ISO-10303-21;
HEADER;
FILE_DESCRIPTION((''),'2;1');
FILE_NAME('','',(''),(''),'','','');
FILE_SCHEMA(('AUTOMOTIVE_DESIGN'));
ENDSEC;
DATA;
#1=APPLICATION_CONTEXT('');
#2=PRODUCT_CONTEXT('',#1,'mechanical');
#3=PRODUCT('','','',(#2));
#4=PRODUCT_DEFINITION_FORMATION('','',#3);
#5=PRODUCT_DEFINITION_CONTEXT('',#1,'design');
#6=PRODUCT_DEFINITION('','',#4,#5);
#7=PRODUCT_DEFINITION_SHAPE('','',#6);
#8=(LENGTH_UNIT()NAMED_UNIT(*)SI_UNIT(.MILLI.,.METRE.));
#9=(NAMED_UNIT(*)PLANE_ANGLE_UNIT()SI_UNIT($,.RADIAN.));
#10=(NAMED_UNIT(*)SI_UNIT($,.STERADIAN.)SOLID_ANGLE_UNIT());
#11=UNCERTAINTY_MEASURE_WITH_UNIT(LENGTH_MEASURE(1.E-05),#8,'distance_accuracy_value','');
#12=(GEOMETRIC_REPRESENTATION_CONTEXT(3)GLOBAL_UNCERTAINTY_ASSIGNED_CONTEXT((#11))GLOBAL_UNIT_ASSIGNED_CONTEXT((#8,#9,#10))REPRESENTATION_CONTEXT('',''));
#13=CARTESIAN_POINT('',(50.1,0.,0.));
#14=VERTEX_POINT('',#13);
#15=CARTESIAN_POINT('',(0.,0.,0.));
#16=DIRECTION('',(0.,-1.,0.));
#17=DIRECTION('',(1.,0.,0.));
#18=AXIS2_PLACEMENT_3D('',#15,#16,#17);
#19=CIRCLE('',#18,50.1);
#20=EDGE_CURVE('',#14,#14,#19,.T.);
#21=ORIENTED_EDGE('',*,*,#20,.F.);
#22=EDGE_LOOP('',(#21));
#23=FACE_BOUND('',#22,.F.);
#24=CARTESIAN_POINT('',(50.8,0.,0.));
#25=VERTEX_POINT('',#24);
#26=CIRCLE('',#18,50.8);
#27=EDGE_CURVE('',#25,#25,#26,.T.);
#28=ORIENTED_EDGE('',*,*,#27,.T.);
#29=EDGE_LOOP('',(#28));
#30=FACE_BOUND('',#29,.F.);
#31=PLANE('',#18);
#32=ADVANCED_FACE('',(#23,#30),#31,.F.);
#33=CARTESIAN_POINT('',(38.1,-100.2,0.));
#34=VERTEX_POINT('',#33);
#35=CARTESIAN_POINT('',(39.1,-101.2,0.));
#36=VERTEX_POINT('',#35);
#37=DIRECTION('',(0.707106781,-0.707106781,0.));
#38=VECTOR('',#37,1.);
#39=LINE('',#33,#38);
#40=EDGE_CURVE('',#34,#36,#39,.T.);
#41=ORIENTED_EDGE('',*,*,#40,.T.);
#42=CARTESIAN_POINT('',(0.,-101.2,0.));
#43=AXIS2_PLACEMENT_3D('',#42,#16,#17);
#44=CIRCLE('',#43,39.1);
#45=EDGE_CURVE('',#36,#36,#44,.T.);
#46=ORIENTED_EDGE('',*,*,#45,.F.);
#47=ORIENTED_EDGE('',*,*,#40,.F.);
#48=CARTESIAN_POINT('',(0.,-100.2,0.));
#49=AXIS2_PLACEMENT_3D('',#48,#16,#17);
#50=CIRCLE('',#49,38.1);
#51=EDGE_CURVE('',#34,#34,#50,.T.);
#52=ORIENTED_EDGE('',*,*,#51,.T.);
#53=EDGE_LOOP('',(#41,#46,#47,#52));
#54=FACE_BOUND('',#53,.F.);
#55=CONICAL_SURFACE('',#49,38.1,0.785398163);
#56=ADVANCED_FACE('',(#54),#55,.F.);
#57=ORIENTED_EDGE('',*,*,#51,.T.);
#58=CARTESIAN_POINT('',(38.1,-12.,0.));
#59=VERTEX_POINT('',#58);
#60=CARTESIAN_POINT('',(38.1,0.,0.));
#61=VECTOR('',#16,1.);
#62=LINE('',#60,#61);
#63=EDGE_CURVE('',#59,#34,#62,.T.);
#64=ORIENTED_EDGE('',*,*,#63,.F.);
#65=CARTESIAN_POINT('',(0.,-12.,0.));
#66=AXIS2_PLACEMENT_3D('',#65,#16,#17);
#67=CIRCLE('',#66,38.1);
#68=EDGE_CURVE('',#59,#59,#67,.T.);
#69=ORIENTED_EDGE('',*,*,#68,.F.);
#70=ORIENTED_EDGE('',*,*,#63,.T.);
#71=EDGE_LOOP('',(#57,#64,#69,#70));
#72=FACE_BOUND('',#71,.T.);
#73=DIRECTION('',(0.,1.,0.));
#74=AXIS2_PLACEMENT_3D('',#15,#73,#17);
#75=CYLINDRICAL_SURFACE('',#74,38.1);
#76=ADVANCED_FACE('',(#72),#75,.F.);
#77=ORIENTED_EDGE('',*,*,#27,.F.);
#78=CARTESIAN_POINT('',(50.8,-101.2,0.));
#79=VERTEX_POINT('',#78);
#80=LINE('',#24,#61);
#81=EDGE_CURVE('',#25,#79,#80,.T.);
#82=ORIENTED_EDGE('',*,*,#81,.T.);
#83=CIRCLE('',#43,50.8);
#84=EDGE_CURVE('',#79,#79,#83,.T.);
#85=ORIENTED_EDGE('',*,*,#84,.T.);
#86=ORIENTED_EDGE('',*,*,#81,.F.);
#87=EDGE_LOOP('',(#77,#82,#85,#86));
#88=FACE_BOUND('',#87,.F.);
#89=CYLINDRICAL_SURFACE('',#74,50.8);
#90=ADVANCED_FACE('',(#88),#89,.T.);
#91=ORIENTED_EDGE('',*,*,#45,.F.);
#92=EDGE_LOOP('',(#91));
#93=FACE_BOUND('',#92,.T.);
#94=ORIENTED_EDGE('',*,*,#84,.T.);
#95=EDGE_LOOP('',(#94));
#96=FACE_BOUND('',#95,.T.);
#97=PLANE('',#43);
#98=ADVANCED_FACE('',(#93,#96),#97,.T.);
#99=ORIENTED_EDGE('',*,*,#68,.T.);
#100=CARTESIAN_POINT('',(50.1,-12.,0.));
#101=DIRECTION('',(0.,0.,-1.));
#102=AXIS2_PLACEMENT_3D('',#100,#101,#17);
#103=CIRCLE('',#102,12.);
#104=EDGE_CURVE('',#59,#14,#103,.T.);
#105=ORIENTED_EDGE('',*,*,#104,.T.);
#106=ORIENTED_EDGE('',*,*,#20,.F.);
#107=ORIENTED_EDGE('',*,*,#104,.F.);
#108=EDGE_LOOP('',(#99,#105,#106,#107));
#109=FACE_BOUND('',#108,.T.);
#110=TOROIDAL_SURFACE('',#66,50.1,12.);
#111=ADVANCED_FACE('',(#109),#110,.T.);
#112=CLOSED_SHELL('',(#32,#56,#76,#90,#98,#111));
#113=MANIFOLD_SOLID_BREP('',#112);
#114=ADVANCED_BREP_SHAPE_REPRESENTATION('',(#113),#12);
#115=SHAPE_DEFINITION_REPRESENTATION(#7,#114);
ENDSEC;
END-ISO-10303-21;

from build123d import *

# Parameters (mm, degrees)
F0_R     = 50.8
F0_R_2   = 38.1
F1_DEPTH = 101.2
F2_R     = 12
F3_SIZE  = 1


with BuildPart() as f1:
    # F0 (on Front) → F1 (new body)
    with BuildSketch(Plane.XZ):
        Circle(F0_R)
        Circle(F0_R_2, mode=Mode.SUBTRACT)
    extrude(amount=F1_DEPTH)

    # F2
    f2_edges = [f1.edges().sort_by_distance(p)[0] for p in [
        (-38.1, 0, 0),
    ]]
    fillet(f2_edges, radius=F2_R)

    # F3
    f3_edges = [f1.edges().sort_by_distance(p)[0] for p in [
        (38.1, -56.6, 0),
        (-38.1, -12, 0),
        (-38.1, -101.2, 0),
    ]]
    chamfer(f3_edges, length=F3_SIZE)


solid = f1.part
